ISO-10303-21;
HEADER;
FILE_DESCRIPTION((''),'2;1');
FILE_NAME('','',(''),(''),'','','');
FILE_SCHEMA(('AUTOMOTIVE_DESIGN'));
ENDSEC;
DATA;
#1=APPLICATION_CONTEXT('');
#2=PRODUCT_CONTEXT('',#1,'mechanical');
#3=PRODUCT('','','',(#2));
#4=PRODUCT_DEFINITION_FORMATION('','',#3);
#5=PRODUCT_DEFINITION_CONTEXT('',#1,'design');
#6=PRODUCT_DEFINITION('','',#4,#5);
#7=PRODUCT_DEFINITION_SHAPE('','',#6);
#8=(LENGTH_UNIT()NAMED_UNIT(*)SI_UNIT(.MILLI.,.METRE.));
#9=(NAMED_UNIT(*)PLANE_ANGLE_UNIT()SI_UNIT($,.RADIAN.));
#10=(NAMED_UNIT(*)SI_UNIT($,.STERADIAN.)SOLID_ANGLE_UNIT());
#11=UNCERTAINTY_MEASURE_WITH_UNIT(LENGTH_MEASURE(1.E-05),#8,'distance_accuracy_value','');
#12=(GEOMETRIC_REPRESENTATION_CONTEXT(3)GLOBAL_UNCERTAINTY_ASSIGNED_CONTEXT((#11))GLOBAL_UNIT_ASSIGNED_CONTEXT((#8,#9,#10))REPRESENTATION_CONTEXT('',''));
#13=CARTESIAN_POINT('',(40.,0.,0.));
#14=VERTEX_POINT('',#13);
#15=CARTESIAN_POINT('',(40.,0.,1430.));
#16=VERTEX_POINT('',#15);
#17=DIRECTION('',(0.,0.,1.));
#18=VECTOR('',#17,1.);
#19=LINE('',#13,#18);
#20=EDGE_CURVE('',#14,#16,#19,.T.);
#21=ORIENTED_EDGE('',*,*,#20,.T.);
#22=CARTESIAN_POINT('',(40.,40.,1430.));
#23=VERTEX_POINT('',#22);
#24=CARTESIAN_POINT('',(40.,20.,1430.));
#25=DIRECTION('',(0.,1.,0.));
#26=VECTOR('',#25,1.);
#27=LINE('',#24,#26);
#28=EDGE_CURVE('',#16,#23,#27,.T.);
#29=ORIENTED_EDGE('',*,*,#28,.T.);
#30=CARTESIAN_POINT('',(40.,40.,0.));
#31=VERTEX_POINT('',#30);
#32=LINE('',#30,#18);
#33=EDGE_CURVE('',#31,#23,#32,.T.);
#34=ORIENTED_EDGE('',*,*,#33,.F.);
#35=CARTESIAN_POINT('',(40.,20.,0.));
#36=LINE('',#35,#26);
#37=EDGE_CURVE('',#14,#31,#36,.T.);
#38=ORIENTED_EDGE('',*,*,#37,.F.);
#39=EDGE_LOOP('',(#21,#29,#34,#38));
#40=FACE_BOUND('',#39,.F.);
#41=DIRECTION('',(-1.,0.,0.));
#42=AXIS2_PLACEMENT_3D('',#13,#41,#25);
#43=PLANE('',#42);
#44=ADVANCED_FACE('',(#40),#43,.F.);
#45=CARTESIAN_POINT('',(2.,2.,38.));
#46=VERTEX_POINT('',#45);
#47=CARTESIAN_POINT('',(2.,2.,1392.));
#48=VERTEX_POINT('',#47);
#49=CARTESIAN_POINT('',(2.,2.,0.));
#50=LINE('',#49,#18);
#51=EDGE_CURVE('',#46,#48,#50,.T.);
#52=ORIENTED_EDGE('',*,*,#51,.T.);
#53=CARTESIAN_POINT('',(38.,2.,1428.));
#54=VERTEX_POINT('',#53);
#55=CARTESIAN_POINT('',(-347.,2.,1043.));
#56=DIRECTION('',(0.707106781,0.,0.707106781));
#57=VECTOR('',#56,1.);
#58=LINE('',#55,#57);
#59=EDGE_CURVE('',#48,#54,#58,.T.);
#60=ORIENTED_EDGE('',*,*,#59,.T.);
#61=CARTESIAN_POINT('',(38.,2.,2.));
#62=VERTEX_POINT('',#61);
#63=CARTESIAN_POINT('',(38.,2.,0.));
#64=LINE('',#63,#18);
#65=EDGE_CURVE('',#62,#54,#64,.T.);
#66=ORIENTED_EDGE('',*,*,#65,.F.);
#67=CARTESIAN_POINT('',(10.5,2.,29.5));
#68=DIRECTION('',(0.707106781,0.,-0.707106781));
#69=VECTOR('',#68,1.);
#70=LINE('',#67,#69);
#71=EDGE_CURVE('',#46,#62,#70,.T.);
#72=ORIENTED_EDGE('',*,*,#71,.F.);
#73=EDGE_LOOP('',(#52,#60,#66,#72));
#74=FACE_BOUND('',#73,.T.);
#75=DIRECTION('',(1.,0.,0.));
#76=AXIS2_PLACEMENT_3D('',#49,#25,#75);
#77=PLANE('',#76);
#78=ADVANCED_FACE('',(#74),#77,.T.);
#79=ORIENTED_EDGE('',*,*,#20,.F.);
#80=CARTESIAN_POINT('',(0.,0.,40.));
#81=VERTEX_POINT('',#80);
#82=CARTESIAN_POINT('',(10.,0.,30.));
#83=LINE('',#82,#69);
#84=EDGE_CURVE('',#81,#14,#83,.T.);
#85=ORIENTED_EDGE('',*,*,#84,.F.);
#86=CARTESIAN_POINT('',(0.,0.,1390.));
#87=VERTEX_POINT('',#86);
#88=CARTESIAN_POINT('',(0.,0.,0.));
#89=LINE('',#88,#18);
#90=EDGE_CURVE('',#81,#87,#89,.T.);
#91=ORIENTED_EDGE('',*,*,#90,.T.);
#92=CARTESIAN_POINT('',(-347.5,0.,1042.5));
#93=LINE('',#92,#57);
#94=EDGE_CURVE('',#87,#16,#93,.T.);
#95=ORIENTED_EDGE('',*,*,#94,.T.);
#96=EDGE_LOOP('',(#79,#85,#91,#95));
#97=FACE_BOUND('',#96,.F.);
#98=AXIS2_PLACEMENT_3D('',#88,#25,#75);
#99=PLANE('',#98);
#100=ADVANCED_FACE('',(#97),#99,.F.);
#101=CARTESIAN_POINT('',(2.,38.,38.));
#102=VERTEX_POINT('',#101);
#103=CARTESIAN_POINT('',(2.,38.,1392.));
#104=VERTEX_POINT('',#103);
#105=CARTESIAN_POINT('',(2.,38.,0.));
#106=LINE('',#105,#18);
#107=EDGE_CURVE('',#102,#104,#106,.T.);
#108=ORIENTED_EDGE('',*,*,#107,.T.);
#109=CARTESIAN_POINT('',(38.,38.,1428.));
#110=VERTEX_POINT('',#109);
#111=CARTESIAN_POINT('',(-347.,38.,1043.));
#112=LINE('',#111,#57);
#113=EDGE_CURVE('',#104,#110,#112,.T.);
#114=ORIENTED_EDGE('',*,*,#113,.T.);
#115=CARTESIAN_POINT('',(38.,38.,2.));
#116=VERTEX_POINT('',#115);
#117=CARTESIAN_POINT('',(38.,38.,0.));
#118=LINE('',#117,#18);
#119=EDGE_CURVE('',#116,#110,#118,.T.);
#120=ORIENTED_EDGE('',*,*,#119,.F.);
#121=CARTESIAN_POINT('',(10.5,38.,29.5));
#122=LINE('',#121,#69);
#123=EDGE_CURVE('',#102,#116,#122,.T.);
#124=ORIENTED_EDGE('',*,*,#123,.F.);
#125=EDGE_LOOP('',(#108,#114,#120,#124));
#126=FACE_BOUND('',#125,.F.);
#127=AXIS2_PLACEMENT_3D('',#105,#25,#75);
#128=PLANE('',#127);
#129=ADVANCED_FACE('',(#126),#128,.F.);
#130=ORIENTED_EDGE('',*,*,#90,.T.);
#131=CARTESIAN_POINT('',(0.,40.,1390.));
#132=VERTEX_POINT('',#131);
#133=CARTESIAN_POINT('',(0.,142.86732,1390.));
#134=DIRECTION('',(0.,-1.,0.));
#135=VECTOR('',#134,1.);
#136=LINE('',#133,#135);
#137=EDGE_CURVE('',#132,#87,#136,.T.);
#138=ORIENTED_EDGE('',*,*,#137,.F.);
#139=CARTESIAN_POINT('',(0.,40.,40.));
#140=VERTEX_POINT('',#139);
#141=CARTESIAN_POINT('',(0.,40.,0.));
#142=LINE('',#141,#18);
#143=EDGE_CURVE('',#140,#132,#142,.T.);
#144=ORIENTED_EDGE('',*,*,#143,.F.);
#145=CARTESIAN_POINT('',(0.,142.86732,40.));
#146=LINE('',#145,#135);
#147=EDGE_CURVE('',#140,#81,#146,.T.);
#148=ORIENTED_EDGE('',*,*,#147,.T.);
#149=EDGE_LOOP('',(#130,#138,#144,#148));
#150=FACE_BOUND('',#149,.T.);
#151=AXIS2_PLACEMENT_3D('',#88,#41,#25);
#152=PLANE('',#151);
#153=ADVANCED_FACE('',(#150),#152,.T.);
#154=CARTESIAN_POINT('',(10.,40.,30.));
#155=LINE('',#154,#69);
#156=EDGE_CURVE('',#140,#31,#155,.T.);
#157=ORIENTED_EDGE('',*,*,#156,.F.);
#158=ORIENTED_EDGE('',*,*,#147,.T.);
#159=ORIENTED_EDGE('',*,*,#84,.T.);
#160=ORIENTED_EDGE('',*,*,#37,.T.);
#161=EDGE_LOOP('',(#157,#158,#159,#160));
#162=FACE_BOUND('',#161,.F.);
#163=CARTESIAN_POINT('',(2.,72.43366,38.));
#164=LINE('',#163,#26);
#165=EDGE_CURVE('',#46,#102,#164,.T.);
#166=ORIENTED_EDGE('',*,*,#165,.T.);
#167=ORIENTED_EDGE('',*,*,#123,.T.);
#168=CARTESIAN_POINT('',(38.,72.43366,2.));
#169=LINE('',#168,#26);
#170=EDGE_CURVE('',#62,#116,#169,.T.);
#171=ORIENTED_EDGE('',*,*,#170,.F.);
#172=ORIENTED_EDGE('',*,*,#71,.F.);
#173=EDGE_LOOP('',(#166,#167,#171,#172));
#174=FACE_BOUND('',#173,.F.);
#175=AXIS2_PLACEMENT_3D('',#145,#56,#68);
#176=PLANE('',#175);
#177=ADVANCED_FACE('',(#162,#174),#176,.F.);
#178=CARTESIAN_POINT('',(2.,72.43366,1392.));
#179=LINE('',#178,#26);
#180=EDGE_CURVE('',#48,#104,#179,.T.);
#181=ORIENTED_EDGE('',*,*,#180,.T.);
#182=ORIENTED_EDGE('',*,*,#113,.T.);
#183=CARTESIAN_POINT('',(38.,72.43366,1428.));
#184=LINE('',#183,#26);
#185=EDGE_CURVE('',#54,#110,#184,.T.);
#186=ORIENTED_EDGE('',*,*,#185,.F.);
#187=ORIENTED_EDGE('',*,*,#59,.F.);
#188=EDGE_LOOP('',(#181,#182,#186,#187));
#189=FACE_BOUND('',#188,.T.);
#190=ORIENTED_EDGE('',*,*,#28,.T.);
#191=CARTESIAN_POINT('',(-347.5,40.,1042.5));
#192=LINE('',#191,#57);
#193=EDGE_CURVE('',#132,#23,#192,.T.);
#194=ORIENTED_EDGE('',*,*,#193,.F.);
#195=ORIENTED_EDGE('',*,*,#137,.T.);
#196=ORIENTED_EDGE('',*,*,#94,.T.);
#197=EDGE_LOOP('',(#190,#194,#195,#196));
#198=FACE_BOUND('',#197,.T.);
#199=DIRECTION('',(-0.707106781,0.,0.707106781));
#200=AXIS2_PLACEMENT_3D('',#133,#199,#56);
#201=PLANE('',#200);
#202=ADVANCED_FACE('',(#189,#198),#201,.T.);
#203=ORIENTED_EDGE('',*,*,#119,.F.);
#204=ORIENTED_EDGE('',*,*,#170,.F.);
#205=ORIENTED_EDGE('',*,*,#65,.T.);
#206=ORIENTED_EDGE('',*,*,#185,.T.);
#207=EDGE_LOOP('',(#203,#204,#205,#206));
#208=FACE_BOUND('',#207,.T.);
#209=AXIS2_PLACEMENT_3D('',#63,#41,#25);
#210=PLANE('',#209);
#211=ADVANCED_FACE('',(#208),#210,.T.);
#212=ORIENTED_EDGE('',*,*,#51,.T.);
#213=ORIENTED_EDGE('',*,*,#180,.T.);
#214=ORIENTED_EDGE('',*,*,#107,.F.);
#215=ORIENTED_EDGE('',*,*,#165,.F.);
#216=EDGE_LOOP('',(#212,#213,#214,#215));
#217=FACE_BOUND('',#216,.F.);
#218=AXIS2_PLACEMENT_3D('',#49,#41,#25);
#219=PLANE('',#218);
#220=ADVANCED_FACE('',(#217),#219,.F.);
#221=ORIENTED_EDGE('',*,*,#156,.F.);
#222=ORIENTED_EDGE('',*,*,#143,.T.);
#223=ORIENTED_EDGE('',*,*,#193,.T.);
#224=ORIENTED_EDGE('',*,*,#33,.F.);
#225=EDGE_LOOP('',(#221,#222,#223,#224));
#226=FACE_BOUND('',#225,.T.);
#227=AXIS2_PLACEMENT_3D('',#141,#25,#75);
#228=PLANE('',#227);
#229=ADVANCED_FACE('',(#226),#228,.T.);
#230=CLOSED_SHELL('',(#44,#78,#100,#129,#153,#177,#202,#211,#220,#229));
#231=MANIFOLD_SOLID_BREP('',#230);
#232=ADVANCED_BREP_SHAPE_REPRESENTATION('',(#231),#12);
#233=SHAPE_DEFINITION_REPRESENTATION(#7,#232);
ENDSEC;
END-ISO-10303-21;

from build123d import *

# Parameters (mm, degrees)
F0_W        = 40
F0_H        = 40
F0_W_2      = 36
F0_H_2      = 36
F1_DEPTH    = 1430
F2_T1_DEPTH = 245.7346390373


# Not quite as in the source:
# - a fillet or chamfer that OpenCascade refuses, or shapes differently, is made with other operations: its cross-section is extruded or revolved along the edge and cut away or added


with BuildPart() as f1:
    # F0 (on Top) → F1 (new body)
    with BuildSketch(Plane.XY):
        with Locations((20, 20)):
            Rectangle(F0_W, F0_H)
        with Locations((20, 20)):
            Rectangle(F0_W_2, F0_H_2, mode=Mode.SUBTRACT)
    extrude(amount=F1_DEPTH)

    # F2: chamfer of 40 on 2 edges, made by hand

    # F2_s2 → F2_t1 (cut)
    with BuildSketch(Plane.XZ.offset(-142.8673195186)):
        Polygon((0, 40), (40, 0), (0, 0), align=None)
        Polygon((0, 1390), (40, 1430), (0, 1430), align=None)
    extrude(amount=F2_T1_DEPTH, mode=Mode.SUBTRACT)


solid = f1.part
